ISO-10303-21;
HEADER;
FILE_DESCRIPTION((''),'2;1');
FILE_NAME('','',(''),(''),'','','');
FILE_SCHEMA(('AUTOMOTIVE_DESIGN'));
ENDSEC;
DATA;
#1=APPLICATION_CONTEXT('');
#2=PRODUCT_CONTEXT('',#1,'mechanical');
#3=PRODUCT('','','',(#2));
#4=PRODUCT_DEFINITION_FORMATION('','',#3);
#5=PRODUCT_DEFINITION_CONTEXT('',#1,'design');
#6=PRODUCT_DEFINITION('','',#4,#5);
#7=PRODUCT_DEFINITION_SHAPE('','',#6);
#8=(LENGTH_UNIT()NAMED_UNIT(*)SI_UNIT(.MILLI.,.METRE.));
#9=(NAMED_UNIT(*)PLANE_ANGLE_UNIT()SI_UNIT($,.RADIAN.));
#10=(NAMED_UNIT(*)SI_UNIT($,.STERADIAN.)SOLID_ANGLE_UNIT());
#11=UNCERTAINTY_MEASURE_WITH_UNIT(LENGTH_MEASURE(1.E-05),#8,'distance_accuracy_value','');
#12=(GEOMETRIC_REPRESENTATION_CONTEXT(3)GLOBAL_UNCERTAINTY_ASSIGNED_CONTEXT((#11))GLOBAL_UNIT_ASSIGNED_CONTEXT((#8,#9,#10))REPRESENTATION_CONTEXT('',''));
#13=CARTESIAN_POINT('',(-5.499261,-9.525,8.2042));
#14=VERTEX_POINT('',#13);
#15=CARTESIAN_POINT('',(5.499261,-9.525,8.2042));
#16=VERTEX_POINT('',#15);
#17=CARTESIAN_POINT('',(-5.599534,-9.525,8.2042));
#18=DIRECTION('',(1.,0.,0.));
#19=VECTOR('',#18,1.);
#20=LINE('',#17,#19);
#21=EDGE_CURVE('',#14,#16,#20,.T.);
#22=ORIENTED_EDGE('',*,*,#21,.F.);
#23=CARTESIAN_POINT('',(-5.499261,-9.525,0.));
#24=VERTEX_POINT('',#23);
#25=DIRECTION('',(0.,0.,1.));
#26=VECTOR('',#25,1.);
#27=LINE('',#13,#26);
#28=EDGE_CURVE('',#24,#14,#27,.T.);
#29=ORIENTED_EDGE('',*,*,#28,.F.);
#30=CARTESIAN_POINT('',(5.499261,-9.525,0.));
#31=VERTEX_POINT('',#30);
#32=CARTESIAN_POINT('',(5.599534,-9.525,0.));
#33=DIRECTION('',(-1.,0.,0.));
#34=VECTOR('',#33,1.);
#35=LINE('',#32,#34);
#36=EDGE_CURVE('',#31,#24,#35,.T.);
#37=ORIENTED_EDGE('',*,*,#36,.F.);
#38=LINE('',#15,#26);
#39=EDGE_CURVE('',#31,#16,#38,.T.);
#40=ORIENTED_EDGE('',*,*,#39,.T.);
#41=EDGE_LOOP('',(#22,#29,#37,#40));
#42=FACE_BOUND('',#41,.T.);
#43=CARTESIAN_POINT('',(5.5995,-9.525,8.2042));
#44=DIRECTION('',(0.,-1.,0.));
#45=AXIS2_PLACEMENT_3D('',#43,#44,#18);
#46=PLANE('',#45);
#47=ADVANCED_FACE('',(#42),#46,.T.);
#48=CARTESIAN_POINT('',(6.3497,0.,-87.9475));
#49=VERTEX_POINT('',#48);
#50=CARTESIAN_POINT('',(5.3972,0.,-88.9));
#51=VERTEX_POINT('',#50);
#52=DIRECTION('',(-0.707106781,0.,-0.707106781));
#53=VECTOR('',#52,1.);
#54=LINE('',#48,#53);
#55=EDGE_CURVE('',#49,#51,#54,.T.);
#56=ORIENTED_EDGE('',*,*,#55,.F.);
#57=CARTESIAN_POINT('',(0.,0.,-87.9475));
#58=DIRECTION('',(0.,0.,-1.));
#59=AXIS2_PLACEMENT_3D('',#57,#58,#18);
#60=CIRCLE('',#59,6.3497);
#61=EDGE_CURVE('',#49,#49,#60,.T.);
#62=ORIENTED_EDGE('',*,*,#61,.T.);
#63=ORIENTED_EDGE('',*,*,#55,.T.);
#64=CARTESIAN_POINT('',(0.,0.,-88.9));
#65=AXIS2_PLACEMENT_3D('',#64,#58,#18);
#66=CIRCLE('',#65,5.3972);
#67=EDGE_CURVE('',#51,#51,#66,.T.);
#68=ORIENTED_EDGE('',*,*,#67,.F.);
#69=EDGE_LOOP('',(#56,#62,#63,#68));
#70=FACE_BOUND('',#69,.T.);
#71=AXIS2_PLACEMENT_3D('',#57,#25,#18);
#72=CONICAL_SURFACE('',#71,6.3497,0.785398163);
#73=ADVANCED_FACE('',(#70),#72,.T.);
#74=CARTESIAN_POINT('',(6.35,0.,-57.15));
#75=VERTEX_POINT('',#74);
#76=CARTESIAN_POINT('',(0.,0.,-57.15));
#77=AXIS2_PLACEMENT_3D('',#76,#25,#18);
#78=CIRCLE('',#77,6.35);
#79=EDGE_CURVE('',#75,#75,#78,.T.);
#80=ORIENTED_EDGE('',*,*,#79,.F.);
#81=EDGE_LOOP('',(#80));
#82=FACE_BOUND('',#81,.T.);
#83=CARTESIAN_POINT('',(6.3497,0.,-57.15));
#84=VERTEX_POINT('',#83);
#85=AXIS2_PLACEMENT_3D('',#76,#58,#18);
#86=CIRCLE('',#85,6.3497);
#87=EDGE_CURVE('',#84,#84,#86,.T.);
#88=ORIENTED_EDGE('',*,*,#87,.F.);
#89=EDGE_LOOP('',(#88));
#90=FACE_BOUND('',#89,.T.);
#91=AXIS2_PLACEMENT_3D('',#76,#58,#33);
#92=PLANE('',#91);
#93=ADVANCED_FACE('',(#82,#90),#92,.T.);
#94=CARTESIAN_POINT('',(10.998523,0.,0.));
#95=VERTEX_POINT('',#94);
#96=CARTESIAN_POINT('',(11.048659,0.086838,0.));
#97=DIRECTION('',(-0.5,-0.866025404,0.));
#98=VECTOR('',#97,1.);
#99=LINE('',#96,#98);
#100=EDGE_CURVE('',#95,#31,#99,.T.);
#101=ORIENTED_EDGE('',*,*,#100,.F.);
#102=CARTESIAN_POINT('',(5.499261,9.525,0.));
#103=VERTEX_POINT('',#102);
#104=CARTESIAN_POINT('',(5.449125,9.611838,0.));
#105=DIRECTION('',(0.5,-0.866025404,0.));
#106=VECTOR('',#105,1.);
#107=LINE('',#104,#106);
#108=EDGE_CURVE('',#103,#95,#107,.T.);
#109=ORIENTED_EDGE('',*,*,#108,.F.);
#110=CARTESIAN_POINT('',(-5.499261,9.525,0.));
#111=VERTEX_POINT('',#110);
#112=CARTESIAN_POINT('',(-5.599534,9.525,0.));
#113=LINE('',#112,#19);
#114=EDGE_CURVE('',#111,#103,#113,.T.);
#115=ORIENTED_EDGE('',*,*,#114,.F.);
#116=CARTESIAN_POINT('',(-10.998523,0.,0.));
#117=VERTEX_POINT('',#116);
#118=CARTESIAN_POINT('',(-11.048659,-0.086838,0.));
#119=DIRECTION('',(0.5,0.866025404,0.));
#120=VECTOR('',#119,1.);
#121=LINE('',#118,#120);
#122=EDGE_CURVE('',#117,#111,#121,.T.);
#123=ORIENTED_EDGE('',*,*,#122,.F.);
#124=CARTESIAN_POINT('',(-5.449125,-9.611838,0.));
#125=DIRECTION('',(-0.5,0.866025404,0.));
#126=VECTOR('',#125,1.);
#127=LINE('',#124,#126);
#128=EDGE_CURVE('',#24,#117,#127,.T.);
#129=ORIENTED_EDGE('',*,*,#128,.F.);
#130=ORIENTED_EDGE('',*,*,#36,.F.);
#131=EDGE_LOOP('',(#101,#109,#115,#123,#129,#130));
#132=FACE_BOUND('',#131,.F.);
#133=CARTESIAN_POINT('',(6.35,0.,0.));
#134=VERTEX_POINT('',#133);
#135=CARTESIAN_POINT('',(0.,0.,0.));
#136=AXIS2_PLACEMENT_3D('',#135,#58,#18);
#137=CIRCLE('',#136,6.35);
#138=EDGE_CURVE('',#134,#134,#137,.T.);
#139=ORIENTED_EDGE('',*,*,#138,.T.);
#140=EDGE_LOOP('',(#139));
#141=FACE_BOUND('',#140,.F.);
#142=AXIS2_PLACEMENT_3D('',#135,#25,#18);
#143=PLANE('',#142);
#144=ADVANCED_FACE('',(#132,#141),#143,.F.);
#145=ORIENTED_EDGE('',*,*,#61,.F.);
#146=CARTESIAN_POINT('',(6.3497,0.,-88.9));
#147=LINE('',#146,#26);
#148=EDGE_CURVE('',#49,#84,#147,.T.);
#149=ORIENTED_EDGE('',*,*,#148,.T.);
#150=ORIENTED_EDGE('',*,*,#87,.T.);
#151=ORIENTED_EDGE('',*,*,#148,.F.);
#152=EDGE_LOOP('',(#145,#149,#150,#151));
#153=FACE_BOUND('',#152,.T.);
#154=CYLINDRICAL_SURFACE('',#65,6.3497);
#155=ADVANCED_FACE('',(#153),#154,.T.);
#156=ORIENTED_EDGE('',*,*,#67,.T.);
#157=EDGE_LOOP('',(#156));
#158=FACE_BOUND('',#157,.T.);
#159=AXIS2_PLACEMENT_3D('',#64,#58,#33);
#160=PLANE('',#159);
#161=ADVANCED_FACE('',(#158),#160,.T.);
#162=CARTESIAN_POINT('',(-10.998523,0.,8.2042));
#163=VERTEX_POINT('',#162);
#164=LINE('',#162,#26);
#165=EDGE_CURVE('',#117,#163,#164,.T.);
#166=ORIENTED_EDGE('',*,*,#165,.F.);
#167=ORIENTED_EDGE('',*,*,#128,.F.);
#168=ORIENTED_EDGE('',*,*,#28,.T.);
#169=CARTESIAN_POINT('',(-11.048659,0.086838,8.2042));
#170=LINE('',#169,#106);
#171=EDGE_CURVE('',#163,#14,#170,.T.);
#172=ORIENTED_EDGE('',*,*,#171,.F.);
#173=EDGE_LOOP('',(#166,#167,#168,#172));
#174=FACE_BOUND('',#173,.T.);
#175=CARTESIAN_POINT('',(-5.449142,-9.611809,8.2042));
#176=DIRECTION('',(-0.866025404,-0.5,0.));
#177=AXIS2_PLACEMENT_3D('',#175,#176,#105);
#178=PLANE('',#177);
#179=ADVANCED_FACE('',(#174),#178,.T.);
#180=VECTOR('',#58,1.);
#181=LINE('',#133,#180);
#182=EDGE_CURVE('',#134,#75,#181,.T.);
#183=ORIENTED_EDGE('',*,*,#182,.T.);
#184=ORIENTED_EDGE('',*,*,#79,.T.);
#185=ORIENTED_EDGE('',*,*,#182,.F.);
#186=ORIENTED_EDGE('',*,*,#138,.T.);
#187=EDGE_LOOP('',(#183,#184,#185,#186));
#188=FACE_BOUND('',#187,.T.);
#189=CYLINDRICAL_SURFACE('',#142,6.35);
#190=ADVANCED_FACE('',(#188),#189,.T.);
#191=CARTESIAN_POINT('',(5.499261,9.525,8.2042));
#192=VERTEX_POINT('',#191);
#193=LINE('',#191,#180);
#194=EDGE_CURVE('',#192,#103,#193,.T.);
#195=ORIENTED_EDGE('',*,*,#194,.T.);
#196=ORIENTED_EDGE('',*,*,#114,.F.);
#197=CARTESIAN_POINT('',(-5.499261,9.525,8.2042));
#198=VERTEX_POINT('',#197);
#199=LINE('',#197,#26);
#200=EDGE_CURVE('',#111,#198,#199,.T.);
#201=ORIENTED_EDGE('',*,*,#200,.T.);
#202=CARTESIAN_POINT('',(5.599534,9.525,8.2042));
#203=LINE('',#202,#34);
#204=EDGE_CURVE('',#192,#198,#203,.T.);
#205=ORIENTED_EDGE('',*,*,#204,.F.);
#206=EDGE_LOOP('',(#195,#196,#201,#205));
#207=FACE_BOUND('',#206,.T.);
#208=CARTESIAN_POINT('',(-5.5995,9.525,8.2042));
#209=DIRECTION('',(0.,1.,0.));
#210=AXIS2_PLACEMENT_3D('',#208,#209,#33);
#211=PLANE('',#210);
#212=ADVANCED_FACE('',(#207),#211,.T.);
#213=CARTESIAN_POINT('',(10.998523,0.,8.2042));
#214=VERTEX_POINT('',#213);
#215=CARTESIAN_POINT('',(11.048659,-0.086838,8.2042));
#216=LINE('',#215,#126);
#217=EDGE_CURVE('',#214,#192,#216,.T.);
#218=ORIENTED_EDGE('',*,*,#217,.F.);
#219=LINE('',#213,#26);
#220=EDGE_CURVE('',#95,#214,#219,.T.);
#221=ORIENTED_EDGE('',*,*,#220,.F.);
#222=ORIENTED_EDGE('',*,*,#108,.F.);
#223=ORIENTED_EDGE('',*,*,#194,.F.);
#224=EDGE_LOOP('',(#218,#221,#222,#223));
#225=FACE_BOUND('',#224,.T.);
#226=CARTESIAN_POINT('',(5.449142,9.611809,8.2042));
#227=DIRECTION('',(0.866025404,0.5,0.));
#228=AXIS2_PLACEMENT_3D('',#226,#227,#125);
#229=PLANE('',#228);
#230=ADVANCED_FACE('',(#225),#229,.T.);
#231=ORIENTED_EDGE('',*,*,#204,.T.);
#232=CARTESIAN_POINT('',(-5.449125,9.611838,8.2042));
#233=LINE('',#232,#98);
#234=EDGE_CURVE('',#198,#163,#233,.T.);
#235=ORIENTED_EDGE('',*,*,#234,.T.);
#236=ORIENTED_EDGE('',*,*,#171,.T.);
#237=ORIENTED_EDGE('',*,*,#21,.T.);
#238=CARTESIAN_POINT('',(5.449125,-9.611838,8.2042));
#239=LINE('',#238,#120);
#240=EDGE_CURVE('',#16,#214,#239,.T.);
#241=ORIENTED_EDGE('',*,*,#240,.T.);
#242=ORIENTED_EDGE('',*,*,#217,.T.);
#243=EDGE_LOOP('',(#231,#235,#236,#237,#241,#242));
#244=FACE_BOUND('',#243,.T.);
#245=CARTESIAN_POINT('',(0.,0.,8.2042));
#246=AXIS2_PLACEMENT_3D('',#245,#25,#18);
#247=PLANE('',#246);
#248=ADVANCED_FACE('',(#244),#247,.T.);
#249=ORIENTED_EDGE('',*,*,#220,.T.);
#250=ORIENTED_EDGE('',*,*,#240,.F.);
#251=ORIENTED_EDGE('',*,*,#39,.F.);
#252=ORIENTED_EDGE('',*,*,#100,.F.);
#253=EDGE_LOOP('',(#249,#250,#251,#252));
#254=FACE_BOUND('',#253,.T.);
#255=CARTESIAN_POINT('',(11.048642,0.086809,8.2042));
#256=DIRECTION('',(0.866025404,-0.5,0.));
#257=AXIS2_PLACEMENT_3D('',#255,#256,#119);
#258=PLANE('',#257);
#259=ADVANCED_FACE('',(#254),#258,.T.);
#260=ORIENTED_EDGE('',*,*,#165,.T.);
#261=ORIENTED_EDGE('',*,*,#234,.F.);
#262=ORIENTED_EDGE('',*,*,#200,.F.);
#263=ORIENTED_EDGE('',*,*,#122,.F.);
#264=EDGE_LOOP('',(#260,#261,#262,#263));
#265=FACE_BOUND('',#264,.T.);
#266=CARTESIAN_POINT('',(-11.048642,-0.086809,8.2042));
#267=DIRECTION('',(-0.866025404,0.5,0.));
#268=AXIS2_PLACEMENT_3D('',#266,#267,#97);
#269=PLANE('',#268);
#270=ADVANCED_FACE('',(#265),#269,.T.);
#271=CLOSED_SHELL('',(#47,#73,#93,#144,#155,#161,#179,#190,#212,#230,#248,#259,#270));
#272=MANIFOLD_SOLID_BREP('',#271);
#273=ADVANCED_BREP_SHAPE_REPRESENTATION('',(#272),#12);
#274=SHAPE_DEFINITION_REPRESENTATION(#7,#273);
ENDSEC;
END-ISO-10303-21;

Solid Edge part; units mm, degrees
sketch "Sketch1" plane through (0, 0, 0) normal (0, 0, 1) x (1, 0, 0)
  circle A0 centre (0, 0) radius 11.049
  dimension "D1" = 22.098
extrude "Protrusion1" add sketch "Sketch1" along normal blind 8.2042
sketch "Sketch2" plane through (0, 0, 0) normal (0, 0, -1) x (1, 0, 0)
  circle A0 centre (0, 0) radius 6.35
extrude "Protrusion2" add sketch "Sketch2" along normal blind 88.9
sketch "Sketch3" plane through (0, 0, -88.9) normal (0, 0, -1) x (1, 0, 0)
  circle A0 centre (0, 0) radius 6.3497
extrude "Cutout1" cut sketch "Sketch3" against normal blind 31.75 flip side to cut
chamfer "Chamfer_1" distance 0.9525 angle 45 1 edges at (-6.3497, 0, -88.9)
sketch "Sketch4" plane through (0, 0, 8.2042) normal (0, 0, 1) x (1, 0, 0)
  line L0 (-5.5995, 9.525) -> (5.5995, 9.525)
  dimension "D1" = 19.05
extrude "Cutout2" cut sketch "Sketch4" against normal up to next material side at (0, 9.575, 8.2042)
pattern_circular "Pattern1" count 6 over 360 about axis through (0, 0, 8.2042) along (0, 0, 1) of "Cutout2"
properties part number "24100895"
